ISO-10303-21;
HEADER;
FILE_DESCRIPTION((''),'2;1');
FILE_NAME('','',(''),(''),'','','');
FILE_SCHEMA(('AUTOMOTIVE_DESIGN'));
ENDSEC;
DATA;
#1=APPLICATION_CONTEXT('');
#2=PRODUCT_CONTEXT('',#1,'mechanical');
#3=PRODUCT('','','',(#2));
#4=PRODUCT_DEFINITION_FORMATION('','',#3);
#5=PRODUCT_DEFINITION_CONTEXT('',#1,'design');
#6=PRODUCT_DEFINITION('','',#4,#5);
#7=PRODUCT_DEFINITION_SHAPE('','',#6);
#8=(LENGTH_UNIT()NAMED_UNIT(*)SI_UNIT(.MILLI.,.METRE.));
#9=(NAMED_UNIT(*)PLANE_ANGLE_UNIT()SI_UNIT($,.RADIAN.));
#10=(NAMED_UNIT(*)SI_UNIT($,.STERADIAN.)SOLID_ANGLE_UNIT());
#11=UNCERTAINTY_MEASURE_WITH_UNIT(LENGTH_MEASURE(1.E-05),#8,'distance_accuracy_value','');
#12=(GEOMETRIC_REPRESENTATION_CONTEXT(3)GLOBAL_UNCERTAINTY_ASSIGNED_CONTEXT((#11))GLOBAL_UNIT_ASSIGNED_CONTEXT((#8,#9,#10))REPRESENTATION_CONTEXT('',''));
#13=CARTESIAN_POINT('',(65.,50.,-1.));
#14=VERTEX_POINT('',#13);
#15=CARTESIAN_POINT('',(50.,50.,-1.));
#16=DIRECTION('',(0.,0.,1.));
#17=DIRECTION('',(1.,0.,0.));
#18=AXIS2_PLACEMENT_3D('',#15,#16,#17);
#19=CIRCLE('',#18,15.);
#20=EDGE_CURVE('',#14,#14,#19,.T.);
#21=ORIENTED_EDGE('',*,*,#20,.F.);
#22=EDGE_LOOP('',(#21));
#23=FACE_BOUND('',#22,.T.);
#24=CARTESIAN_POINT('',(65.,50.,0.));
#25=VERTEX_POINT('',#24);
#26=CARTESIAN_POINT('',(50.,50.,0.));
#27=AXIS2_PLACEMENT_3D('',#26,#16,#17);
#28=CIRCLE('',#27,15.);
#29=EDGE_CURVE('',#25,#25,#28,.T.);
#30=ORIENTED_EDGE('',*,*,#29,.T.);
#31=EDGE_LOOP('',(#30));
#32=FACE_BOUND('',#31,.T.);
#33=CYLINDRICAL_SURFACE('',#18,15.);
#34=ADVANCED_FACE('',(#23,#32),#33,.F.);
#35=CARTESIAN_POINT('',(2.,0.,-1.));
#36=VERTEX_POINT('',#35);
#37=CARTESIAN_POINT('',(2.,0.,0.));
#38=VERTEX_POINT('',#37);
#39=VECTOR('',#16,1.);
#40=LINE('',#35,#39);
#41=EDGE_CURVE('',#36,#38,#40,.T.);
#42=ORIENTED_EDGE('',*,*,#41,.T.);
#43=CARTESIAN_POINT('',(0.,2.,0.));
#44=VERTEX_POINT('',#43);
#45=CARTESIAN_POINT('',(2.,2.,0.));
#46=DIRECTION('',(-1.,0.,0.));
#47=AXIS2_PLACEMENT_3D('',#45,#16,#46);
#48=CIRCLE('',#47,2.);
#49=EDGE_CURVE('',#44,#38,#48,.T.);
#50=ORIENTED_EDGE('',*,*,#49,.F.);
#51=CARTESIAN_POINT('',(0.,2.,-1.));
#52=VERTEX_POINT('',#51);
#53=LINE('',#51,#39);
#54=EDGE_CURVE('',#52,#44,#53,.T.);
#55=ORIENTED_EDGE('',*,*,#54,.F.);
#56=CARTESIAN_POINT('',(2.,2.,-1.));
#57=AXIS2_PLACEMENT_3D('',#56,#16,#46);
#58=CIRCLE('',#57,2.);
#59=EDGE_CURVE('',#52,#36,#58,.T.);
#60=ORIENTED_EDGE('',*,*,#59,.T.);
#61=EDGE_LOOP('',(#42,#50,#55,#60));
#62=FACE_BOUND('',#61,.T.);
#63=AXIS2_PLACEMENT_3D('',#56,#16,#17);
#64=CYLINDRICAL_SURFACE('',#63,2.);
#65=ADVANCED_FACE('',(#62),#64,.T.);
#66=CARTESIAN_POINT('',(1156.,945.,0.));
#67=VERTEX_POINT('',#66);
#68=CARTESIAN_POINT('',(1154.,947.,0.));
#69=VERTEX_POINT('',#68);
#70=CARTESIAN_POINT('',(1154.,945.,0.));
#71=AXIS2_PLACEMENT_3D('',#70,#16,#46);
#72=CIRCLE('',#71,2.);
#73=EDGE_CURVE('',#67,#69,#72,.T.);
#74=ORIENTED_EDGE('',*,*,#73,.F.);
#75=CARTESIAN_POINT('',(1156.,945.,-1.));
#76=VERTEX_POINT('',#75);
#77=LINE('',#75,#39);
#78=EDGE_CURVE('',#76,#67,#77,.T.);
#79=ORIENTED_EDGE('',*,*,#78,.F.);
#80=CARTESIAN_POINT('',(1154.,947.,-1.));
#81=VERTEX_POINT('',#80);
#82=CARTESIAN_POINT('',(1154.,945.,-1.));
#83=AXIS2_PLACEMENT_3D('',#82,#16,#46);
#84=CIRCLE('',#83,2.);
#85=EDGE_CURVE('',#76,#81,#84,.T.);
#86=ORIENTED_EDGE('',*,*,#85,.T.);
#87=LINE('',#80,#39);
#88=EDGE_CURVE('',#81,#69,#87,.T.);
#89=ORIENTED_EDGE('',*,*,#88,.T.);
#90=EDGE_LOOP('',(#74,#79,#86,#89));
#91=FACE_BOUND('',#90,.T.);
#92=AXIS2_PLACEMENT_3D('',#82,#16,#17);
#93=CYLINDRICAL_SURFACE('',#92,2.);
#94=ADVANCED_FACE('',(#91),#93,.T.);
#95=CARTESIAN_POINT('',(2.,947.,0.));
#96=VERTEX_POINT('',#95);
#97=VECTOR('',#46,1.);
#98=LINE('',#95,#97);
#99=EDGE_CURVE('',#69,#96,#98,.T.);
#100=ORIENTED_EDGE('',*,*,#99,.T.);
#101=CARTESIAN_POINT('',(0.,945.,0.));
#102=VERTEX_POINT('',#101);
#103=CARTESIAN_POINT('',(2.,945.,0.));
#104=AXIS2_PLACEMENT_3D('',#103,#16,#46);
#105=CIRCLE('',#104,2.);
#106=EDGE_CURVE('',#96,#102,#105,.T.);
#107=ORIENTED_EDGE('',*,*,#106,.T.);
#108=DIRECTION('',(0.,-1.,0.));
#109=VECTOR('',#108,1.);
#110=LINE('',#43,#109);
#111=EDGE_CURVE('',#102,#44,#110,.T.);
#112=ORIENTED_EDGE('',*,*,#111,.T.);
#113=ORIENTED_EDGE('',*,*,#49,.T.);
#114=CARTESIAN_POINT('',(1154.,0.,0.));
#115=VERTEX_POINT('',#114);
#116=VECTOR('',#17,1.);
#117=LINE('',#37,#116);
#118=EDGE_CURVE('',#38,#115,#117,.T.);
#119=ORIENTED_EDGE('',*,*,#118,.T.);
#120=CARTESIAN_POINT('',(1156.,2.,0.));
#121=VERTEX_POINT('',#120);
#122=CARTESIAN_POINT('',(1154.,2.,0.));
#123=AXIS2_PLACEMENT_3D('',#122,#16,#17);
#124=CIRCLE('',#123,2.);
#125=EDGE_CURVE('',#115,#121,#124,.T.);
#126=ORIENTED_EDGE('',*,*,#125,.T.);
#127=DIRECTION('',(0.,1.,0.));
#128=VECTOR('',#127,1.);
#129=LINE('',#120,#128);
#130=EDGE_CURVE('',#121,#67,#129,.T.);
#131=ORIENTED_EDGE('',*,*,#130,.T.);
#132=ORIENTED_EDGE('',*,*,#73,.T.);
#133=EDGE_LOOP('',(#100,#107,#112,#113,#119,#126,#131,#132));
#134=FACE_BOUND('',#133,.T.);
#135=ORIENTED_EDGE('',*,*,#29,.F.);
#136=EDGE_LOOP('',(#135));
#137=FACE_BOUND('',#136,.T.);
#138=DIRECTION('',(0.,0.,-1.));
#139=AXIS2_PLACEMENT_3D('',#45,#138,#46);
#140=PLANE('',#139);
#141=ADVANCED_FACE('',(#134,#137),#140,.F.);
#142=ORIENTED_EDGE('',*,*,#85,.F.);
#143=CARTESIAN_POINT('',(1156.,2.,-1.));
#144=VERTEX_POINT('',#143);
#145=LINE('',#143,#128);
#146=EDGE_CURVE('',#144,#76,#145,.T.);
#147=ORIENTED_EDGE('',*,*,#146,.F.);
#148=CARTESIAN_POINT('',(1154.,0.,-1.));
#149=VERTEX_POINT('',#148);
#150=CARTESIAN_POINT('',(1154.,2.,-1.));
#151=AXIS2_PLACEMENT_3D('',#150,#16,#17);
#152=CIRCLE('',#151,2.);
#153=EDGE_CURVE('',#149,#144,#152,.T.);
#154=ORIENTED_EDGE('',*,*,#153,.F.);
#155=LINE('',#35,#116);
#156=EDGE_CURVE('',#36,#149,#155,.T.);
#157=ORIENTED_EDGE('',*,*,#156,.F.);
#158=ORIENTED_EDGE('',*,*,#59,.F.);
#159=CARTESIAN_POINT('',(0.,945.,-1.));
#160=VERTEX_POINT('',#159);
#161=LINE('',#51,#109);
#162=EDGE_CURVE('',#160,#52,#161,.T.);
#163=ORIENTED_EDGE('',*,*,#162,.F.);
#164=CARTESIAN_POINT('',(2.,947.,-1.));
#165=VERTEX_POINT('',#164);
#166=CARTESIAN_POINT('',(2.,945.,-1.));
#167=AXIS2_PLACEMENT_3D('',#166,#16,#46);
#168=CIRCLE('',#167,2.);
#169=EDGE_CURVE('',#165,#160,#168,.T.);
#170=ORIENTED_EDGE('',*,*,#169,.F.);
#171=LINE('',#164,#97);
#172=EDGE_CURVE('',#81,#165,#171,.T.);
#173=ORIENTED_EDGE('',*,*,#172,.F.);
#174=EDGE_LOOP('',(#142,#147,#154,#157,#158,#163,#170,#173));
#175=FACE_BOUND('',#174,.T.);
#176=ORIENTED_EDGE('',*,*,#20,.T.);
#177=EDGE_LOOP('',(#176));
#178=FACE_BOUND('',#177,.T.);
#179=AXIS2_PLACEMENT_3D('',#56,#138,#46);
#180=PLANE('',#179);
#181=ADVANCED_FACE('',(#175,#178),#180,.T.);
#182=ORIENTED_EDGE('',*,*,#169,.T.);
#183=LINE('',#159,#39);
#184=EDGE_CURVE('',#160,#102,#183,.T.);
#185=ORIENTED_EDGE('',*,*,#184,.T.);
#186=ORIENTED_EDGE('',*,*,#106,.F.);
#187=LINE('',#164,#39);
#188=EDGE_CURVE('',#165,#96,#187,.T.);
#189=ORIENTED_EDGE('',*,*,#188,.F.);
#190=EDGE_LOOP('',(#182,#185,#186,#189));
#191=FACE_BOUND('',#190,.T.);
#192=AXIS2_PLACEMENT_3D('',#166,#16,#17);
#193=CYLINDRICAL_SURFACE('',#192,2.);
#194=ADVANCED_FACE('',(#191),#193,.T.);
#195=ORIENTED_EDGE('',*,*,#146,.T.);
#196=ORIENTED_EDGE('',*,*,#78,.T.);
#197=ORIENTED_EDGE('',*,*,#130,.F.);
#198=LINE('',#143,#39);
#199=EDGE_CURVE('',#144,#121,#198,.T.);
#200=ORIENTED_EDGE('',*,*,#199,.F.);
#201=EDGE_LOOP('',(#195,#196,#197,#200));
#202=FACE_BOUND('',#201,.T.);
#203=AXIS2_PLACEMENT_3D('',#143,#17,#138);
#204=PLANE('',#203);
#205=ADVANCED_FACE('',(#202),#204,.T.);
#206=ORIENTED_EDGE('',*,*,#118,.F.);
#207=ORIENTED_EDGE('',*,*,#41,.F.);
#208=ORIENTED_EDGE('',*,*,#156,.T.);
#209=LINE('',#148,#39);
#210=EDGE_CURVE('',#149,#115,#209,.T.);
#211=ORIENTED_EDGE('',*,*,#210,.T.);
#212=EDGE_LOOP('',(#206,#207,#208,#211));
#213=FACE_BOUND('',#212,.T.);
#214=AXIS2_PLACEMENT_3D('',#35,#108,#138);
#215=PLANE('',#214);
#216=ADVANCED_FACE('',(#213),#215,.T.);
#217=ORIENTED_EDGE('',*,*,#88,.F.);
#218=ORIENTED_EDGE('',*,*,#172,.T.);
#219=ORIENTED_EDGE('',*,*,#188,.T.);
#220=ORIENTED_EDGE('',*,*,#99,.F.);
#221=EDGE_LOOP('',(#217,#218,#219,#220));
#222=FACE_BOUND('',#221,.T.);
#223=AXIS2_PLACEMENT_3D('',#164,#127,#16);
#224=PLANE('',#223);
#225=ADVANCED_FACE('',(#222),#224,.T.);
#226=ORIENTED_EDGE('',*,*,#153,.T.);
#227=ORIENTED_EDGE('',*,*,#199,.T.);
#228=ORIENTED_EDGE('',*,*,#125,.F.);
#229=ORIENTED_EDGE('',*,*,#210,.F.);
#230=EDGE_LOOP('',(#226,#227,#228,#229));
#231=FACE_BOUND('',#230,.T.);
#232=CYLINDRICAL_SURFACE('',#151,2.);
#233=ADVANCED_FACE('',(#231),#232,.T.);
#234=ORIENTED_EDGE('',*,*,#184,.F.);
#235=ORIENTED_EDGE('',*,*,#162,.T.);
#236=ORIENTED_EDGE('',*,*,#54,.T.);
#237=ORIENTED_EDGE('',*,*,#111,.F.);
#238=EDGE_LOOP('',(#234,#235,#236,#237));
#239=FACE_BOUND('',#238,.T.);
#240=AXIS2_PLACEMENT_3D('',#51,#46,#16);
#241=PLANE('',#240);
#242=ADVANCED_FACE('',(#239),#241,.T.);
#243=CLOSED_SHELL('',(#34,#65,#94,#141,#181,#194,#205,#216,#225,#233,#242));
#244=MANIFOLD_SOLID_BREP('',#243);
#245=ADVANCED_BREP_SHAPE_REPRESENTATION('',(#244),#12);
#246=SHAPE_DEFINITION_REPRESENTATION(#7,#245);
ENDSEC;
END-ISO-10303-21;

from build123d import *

# Parameters (mm, degrees)
SKETCH1_R          = 15
BASE_FLANGE1_DEPTH = 1


# Sheet-metal steps are written as plain solids
with BuildPart() as part:
    # Sketch1 → Base-Flange1 (new body)
    with BuildSketch(Plane.XY):
        with BuildLine():
            Line((2, 0), (1154, 0))
            ThreePointArc((1154, 0), (1155.414213562, 0.585786438), (1156, 2))
            Line((1156, 2), (1156, 945))
            ThreePointArc((1156, 945), (1155.414213562, 946.414213562), (1154, 947))
            Line((1154, 947), (2, 947))
            ThreePointArc((2, 947), (0.585786438, 946.414213562), (0, 945))
            Line((0, 945), (0, 2))
            ThreePointArc((0, 2), (0.585786438, 0.585786438), (2, 0))
        make_face()
        with Locations((50, 50)):
            Circle(SKETCH1_R, mode=Mode.SUBTRACT)
    extrude(amount=-BASE_FLANGE1_DEPTH)


solid = part.part
